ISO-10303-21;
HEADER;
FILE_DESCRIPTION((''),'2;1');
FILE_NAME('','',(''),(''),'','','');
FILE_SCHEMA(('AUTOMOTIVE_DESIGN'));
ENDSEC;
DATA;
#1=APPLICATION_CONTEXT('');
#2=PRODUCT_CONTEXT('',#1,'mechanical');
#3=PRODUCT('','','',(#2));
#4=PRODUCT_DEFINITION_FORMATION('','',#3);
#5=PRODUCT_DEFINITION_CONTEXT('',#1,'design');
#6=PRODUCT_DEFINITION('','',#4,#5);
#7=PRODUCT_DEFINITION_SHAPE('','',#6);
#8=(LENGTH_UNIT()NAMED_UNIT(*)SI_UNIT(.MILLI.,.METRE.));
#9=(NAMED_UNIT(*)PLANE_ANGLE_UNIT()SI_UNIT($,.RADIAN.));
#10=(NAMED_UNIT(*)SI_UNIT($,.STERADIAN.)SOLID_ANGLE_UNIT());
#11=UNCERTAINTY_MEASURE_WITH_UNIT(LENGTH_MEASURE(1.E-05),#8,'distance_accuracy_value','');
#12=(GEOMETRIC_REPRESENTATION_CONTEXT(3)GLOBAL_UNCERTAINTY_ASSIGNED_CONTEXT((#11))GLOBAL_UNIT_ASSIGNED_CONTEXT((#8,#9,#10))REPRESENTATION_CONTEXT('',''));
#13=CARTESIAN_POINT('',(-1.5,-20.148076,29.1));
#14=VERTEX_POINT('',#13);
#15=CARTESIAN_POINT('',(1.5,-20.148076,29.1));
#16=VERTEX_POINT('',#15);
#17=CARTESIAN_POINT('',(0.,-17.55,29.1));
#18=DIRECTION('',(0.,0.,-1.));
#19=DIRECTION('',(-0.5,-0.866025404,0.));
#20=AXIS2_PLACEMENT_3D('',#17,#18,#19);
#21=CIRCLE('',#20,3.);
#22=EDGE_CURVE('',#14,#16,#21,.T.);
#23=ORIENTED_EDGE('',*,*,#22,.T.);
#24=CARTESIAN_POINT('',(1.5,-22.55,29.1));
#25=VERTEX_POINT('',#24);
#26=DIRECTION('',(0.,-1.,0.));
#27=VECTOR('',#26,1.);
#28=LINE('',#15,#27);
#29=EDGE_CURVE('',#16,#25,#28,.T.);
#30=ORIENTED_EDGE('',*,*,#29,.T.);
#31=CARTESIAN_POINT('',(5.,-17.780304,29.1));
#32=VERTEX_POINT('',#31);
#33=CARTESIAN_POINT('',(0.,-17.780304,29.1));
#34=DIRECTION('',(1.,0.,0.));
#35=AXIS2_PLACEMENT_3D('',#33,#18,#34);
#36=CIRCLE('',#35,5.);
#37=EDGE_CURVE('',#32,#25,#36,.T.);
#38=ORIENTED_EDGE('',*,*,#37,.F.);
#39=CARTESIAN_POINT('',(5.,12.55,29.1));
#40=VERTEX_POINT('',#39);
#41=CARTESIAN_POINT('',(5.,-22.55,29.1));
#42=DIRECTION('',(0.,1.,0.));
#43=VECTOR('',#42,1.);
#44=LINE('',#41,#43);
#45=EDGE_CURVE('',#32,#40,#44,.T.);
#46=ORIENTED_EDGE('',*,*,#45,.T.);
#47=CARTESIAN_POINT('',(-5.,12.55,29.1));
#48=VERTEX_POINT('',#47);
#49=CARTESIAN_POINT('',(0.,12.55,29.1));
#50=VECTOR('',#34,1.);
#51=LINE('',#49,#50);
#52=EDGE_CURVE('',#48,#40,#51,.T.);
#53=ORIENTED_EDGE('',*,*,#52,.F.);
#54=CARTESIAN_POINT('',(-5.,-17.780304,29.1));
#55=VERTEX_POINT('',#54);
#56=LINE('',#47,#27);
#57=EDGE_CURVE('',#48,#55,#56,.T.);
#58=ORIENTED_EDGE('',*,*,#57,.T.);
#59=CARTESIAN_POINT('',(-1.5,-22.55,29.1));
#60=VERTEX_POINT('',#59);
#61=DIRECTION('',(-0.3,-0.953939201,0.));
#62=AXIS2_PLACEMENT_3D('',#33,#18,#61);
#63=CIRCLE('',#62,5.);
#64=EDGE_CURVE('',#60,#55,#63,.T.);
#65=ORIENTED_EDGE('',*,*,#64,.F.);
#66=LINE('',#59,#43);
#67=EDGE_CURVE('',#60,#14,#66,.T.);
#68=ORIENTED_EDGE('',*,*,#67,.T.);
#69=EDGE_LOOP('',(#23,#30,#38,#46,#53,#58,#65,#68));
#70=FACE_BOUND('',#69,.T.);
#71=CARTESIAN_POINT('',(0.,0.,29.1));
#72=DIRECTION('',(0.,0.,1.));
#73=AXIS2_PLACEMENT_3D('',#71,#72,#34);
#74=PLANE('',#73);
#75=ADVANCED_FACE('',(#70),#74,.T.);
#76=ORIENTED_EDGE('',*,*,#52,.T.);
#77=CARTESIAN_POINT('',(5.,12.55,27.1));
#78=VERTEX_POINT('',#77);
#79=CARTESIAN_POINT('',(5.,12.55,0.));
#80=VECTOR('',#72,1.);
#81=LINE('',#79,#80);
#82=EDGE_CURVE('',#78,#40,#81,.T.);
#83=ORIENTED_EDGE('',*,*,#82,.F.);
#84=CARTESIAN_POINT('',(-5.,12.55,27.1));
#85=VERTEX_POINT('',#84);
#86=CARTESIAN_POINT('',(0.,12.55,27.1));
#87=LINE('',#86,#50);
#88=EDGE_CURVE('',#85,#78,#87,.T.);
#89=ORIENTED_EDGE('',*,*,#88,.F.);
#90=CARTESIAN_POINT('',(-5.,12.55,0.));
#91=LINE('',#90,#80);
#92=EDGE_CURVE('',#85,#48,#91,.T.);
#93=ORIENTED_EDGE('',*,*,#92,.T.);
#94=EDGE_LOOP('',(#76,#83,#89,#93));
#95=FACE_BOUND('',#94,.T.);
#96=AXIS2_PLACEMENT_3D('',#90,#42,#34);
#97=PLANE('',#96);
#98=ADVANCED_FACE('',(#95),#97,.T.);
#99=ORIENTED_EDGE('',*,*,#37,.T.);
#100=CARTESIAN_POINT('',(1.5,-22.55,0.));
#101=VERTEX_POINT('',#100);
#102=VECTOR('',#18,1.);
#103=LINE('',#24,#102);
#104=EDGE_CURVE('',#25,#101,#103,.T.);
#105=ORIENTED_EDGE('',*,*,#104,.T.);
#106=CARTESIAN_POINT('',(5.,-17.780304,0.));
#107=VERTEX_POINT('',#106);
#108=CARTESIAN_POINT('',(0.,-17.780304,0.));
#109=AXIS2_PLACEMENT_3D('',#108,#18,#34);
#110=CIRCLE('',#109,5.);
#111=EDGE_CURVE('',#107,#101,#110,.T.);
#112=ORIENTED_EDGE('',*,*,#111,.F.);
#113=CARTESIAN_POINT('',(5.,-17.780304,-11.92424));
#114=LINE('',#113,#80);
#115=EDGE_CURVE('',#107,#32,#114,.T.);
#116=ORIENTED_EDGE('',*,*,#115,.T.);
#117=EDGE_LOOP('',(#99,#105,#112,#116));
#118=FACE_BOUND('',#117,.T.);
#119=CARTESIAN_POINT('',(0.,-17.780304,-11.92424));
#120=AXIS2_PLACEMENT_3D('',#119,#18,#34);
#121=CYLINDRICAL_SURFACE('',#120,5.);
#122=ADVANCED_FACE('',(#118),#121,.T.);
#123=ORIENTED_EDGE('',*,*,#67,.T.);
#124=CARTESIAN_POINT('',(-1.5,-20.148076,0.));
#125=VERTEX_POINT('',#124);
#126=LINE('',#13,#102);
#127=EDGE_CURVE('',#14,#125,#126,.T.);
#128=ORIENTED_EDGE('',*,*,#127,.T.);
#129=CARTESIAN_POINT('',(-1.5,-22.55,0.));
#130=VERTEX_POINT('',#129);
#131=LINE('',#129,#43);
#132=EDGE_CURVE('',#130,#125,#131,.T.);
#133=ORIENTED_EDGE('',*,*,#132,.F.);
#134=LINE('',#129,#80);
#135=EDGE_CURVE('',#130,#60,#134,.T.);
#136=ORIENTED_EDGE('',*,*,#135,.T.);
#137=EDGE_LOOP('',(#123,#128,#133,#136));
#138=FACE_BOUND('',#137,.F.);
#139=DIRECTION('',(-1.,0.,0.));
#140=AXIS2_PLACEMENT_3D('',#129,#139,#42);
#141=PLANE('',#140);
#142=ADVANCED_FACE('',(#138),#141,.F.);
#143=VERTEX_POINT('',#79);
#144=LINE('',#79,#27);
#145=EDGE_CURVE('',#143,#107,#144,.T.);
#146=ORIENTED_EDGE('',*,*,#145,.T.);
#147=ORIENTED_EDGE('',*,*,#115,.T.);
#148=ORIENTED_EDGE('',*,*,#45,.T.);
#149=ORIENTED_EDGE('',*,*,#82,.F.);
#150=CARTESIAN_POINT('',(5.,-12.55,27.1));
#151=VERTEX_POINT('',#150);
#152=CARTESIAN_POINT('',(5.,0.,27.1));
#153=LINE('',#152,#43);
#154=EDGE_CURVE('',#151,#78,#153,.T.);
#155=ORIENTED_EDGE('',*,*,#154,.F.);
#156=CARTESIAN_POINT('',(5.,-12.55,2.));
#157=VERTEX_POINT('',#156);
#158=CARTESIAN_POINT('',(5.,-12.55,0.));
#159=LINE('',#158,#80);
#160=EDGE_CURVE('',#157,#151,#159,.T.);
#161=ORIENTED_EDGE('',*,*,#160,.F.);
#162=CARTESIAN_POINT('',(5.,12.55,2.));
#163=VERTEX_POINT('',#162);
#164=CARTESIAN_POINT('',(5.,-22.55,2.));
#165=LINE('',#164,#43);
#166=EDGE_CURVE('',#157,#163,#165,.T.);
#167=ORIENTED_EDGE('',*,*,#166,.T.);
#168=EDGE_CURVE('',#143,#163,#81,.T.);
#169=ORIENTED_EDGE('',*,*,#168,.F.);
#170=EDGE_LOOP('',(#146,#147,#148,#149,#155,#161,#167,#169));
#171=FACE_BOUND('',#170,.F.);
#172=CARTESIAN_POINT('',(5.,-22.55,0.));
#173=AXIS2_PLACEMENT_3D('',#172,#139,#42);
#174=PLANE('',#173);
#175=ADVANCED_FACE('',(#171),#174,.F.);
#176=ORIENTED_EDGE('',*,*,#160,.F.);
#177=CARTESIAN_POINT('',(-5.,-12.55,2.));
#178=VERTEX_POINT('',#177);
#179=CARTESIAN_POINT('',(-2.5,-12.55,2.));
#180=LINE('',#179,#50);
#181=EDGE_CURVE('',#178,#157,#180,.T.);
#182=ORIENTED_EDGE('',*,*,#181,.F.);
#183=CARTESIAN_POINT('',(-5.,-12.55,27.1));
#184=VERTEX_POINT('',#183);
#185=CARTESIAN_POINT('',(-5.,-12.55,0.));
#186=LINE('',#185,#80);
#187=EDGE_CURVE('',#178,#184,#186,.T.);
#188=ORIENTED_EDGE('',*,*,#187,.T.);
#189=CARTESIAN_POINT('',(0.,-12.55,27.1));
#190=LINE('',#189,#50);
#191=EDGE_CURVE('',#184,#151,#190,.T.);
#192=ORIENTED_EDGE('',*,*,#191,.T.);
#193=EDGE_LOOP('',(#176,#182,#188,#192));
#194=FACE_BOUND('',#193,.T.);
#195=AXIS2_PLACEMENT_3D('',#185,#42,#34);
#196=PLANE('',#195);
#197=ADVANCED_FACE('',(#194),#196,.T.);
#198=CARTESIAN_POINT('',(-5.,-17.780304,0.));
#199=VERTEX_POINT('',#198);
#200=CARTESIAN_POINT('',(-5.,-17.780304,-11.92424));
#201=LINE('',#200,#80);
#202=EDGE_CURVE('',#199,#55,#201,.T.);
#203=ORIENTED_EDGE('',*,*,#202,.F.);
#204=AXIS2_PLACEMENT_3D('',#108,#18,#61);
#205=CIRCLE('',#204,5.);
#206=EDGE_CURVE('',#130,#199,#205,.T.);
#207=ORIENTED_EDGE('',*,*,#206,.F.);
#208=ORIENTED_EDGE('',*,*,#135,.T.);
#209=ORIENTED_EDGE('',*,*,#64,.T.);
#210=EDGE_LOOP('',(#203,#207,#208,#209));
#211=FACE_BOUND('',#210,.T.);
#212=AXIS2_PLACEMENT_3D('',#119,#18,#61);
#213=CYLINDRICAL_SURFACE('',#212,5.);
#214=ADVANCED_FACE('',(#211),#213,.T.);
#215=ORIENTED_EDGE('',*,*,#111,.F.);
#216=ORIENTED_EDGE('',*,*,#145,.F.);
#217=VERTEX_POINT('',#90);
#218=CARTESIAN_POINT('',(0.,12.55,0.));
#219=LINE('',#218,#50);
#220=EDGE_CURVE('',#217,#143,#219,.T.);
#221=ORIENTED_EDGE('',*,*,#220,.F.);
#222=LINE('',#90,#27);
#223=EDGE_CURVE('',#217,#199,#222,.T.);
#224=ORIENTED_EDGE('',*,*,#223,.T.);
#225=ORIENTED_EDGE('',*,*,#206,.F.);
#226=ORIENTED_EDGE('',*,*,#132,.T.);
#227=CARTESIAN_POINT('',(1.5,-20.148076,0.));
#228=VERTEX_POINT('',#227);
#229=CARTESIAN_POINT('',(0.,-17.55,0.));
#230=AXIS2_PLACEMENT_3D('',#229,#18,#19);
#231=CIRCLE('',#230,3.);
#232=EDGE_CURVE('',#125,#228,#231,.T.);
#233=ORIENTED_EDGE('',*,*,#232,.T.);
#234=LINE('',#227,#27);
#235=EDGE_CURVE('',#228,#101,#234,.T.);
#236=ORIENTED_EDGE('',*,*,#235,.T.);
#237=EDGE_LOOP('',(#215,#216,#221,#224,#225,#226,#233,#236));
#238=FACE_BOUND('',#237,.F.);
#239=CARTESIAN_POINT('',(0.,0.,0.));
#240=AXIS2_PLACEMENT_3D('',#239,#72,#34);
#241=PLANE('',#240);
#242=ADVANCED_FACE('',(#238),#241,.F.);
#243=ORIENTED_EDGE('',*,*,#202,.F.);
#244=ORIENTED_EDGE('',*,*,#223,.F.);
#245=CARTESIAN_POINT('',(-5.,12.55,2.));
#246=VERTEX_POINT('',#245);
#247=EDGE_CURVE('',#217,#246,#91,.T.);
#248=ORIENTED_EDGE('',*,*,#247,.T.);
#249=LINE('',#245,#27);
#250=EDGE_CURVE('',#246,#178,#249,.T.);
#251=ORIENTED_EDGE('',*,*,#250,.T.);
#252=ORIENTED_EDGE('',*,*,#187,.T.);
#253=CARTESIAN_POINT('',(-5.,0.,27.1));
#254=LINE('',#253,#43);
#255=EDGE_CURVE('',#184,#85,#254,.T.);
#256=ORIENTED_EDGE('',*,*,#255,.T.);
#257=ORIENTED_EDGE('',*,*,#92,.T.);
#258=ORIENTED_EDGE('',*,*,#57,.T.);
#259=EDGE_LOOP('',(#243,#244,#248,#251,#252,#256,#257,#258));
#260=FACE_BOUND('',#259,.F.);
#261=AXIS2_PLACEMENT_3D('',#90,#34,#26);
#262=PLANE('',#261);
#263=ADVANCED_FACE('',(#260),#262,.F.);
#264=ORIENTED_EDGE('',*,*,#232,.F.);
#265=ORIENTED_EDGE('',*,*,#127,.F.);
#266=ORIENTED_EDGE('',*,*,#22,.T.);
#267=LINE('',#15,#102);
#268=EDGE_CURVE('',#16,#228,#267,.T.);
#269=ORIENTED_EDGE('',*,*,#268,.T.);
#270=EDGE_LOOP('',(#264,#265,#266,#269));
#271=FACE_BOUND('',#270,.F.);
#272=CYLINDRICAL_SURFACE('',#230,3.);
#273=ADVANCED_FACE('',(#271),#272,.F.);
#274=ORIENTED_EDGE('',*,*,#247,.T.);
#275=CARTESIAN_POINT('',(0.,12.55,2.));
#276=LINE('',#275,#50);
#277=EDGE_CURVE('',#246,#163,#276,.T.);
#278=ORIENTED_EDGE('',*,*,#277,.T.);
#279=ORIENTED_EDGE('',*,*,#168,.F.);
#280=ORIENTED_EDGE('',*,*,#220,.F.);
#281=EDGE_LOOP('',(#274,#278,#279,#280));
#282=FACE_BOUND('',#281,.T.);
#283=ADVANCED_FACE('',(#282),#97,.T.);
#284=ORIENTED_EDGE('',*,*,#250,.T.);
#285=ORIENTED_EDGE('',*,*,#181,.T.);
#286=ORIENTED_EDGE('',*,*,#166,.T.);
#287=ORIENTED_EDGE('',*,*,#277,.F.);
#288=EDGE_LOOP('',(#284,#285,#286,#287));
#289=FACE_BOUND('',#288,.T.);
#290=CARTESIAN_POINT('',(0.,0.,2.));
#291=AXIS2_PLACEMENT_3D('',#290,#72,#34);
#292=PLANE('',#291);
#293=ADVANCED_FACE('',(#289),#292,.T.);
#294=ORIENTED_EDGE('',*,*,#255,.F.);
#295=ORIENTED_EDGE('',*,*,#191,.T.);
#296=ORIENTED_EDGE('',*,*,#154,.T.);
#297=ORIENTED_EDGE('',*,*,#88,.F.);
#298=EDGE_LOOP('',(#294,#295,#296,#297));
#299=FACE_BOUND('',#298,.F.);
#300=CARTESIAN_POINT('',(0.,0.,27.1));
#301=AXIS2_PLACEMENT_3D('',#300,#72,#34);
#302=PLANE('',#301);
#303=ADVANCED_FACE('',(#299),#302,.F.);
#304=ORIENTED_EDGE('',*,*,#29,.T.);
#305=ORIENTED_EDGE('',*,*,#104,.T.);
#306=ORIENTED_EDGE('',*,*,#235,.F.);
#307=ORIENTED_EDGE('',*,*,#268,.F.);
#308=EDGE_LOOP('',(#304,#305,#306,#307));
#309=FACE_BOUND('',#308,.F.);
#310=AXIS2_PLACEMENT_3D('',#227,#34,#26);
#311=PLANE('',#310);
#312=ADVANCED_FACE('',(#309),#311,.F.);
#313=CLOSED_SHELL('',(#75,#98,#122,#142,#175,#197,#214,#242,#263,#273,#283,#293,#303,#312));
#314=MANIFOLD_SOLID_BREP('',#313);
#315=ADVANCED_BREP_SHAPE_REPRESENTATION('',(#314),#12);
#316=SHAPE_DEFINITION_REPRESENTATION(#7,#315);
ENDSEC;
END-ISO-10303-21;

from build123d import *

# Parameters (mm, degrees)
F3_W        = 10
F3_H        = 25.1
F4_DEPTH    = 29.1
F5_DEPTH    = 27.1
F6_DEPTH    = 2
F7_T1_DEPTH = 52.9484800354


# Not quite as in the source:
# - a fillet or chamfer that OpenCascade refuses, or shapes differently, is made with other operations: its cross-section is extruded or revolved along the edge and cut away or added


with BuildPart() as f4:
    # F3 (on Top) → F4 (new body)
    with BuildSketch(Plane.XY):
        Rectangle(F3_W, F3_H)
        with BuildLine():
            Line((5, -12.55), (-5, -12.55))
            Line((-5, -12.55), (-5, -22.55))
            Line((-5, -22.55), (-1.5, -22.55))
            Line((-1.5, -22.55), (-1.5, -20.1480762114))
            ThreePointArc((-1.5, -20.1480762114), (0, -14.55), (1.5, -20.1480762114))
            Line((1.5, -20.1480762114), (1.5, -22.55))
            Line((1.5, -22.55), (5, -22.55))
            Line((5, -22.55), (5, -12.55))
        make_face()
    extrude(amount=F4_DEPTH)

    # F3 (on Top) → F5 (cut)
    with BuildSketch(Plane.XY):
        Rectangle(F3_W, F3_H)
    extrude(amount=F5_DEPTH, mode=Mode.SUBTRACT)

    # F3 (on Top) → F6 (join)
    with BuildSketch(Plane.XY):
        Rectangle(F3_W, F3_H)
        with BuildLine():
            Line((5, -12.55), (-5, -12.55))
            Line((-5, -12.55), (-5, -22.55))
            Line((-5, -22.55), (-1.5, -22.55))
            Line((-1.5, -22.55), (-1.5, -20.1480762114))
            ThreePointArc((-1.5, -20.1480762114), (0, -14.55), (1.5, -20.1480762114))
            Line((1.5, -20.1480762114), (1.5, -22.55))
            Line((1.5, -22.55), (5, -22.55))
            Line((5, -22.55), (5, -12.55))
        make_face()
    extrude(amount=F6_DEPTH)

    # F7: fillet of radius 5 on 2 edges, made by hand

    # F7_s2 → F7_t1 (cut)
    with BuildSketch(Plane.XY.offset(-11.9242400177)):
        with BuildLine():
            ThreePointArc((-1.5, -22.55), (-4.0311288741, -20.7383438845), (-5, -17.7803039929))
            Line((-5, -17.7803039929), (-5, -22.55))
            Line((-5, -22.55), (-1.5, -22.55))
        make_face()
        with BuildLine():
            ThreePointArc((5, -17.7803039929), (4.0311288741, -20.7383438845), (1.5, -22.55))
            Line((1.5, -22.55), (5, -22.55))
            Line((5, -22.55), (5, -17.7803039929))
        make_face()
    extrude(amount=F7_T1_DEPTH, mode=Mode.SUBTRACT)


solid = f4.part
